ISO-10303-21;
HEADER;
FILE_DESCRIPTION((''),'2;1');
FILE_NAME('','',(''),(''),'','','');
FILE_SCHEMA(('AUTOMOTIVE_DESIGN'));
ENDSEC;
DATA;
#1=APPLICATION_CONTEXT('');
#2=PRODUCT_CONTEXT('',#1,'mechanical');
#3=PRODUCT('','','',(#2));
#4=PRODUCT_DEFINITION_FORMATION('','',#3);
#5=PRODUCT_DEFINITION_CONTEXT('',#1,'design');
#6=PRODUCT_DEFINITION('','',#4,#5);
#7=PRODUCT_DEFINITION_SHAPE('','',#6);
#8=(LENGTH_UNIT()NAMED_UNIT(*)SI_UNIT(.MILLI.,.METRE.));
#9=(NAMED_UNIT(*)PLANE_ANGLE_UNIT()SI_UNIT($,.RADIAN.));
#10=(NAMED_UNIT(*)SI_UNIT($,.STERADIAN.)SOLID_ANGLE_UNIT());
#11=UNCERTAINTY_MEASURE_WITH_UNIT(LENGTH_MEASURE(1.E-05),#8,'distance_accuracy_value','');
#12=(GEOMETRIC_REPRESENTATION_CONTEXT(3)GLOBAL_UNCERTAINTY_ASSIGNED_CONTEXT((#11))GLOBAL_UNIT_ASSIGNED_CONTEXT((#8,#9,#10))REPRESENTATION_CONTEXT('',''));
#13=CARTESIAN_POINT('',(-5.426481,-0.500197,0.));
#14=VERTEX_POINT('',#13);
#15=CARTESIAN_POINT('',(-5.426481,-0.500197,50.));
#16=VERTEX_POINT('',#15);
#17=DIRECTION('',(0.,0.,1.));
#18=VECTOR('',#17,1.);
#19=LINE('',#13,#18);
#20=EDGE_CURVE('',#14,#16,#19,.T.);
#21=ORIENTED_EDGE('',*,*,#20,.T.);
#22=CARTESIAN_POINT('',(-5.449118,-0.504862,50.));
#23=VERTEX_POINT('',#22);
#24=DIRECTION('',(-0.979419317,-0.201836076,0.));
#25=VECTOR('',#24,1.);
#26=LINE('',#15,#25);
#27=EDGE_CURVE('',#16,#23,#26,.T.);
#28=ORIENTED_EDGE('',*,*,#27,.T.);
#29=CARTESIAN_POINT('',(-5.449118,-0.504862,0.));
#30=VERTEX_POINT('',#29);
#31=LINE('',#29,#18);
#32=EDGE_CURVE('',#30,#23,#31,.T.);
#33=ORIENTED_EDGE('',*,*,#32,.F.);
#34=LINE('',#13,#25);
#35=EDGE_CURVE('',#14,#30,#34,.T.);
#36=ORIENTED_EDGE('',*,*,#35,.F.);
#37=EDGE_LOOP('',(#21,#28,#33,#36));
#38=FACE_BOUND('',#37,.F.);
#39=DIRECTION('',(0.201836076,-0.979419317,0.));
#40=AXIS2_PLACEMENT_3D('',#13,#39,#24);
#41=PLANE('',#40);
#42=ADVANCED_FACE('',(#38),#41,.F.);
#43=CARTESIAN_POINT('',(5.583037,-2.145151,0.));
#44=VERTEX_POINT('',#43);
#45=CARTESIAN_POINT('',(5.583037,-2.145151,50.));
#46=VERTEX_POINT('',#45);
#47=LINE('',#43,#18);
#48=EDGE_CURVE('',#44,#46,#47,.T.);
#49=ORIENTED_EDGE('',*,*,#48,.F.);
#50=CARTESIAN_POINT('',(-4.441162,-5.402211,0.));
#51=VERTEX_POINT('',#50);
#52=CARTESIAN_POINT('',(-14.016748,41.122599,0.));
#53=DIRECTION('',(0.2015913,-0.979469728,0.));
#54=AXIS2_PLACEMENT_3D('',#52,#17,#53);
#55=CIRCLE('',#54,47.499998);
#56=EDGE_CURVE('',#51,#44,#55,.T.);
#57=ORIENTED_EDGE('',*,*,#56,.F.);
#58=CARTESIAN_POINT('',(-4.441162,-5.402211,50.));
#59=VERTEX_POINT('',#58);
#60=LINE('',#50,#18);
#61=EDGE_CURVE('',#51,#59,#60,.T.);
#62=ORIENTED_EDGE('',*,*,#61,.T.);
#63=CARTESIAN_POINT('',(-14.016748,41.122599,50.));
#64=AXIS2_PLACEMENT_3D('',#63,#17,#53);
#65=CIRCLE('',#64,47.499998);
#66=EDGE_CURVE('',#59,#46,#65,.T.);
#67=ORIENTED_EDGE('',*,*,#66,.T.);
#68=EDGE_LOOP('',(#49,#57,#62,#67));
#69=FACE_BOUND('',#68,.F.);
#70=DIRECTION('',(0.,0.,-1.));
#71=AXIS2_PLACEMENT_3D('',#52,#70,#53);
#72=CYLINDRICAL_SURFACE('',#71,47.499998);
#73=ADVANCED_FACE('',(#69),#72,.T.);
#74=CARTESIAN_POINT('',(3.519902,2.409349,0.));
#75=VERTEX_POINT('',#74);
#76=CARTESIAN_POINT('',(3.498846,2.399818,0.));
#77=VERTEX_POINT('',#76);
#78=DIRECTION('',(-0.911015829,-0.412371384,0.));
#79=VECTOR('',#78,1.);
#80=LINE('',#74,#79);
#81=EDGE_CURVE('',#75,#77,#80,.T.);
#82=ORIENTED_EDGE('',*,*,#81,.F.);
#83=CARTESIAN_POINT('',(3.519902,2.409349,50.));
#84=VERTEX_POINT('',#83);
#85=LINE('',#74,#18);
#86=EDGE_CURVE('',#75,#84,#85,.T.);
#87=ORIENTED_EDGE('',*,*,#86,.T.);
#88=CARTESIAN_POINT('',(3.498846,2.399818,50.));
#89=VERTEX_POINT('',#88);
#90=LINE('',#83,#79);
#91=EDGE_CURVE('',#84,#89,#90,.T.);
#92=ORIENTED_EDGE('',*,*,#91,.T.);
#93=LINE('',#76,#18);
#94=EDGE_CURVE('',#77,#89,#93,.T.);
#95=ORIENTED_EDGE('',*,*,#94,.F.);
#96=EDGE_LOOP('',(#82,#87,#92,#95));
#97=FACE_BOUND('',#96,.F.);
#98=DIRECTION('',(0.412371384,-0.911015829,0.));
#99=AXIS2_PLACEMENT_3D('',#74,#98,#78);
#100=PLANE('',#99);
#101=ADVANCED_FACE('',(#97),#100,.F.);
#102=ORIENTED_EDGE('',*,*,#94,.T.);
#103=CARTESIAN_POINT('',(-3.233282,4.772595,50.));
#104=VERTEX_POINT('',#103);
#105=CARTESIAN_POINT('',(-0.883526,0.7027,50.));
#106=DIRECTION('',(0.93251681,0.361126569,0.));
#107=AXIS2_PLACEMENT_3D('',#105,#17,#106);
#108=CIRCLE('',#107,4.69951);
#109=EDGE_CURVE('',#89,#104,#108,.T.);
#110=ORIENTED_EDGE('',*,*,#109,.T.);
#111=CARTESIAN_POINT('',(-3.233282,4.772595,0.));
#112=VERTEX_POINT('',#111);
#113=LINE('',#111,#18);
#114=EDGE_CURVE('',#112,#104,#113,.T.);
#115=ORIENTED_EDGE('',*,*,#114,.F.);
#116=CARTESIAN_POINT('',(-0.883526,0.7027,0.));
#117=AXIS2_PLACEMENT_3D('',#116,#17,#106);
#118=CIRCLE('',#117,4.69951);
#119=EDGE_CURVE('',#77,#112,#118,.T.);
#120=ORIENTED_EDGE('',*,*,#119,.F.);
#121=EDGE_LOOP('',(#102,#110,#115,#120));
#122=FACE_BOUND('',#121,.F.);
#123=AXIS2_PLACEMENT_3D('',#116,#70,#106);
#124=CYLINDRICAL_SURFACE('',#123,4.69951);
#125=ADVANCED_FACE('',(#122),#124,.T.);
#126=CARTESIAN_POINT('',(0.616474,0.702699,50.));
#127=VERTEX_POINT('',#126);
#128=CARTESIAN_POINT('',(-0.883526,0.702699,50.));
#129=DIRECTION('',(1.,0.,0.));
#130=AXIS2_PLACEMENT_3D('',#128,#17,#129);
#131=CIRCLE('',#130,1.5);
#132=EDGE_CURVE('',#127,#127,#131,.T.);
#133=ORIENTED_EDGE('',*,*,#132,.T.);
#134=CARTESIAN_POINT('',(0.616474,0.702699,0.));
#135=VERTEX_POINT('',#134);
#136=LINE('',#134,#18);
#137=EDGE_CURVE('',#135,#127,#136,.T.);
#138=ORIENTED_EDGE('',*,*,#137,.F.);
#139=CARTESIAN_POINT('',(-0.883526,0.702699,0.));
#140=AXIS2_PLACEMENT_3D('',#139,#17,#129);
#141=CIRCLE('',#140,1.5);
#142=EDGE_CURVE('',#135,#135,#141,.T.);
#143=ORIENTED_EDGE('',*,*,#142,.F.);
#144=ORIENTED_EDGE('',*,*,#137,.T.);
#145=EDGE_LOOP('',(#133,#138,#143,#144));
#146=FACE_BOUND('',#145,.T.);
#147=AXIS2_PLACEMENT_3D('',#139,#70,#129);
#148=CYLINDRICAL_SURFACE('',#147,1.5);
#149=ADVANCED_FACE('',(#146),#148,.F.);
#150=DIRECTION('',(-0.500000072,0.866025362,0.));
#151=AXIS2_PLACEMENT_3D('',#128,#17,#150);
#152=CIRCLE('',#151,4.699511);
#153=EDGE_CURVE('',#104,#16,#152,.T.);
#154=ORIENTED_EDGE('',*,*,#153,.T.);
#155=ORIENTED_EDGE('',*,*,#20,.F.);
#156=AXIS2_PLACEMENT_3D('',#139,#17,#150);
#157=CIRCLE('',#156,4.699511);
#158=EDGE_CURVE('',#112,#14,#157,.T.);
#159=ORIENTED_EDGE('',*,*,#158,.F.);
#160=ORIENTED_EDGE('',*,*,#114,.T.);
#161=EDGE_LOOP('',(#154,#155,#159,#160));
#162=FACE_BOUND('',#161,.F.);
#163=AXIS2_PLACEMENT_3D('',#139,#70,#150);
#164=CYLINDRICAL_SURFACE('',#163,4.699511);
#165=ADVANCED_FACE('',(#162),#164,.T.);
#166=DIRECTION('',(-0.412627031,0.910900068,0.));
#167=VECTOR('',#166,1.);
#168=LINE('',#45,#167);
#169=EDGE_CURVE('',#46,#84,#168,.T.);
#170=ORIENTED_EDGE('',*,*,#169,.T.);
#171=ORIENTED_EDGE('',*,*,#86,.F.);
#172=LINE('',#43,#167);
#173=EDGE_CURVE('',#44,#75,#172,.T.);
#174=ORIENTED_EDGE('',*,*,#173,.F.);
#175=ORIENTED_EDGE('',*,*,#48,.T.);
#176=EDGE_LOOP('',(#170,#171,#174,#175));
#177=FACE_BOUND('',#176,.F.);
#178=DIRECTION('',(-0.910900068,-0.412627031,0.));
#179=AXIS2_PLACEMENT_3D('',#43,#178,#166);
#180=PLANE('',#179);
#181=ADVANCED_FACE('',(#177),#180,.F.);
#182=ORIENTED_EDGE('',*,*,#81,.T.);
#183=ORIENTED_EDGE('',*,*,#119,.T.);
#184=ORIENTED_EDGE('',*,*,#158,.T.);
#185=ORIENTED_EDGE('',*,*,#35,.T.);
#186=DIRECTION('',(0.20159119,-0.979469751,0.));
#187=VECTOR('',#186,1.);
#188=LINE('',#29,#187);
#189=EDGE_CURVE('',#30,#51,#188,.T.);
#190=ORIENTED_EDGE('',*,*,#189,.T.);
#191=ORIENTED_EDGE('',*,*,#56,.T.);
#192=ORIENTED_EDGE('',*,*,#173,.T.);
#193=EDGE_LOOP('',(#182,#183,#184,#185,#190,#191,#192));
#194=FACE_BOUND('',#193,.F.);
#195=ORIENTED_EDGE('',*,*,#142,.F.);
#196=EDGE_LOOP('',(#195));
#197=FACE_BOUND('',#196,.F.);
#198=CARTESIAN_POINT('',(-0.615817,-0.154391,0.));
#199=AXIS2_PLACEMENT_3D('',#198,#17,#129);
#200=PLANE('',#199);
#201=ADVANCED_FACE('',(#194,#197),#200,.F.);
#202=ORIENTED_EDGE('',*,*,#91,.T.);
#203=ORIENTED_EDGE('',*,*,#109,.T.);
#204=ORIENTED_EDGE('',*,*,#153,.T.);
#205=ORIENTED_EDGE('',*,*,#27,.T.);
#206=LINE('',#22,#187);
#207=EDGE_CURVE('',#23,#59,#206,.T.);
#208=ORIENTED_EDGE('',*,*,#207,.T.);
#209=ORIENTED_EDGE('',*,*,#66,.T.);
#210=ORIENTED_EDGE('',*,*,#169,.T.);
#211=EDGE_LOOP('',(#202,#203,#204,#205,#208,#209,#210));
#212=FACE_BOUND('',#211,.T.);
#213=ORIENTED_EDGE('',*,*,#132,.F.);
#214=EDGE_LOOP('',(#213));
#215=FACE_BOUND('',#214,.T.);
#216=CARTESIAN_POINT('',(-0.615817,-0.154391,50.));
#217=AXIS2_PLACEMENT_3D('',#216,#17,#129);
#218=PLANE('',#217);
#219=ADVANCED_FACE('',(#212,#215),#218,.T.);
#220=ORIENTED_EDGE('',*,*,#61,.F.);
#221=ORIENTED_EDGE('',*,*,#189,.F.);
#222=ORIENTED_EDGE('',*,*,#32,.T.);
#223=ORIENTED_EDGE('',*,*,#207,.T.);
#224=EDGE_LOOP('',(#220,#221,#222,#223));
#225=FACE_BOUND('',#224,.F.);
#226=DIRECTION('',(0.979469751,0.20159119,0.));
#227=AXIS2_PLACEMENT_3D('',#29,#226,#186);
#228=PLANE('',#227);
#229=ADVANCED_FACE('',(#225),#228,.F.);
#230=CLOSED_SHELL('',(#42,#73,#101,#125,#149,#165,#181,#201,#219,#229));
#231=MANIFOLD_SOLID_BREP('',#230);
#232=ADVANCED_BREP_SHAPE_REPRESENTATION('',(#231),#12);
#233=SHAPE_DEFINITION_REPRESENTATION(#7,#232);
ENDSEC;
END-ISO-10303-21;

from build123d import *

# Parameters (mm, degrees)
F0_R     = 1.5
F1_DEPTH = 50


# Not quite as in the source:
# - ends of sketch curves that miss each other by under 0.0002 mm in the source are joined


with BuildPart() as f1:
    # F0 (on Top) → F1 (new body)
    with BuildSketch(Plane.XY):
        with BuildLine():
            Line((-5.449118, -0.504862), (-4.441162, -5.402211))
            ThreePointArc((-4.441162, -5.402211), (0.6615584195, -4.0525834634), (5.5830371113, -2.1451512457))
            Line((5.5830371113, -2.1451512457), (3.519902, 2.409349))
            Line((3.519902, 2.409349), (3.498846, 2.399818))
            ThreePointArc((3.498846, 2.399818), (0.6786519051, 5.1349674747), (-3.2332818366, 4.772594717))
            ThreePointArc((-3.2332818366, 4.772594717), (-5.2226446667, 2.5075404986), (-5.4264814855, -0.5001971285))
            Line((-5.4264814855, -0.5001971285), (-5.449118, -0.504862))
        make_face()
        with Locations((-0.883526, 0.702699)):
            Circle(F0_R, mode=Mode.SUBTRACT)
    extrude(amount=F1_DEPTH)


solid = f1.part
